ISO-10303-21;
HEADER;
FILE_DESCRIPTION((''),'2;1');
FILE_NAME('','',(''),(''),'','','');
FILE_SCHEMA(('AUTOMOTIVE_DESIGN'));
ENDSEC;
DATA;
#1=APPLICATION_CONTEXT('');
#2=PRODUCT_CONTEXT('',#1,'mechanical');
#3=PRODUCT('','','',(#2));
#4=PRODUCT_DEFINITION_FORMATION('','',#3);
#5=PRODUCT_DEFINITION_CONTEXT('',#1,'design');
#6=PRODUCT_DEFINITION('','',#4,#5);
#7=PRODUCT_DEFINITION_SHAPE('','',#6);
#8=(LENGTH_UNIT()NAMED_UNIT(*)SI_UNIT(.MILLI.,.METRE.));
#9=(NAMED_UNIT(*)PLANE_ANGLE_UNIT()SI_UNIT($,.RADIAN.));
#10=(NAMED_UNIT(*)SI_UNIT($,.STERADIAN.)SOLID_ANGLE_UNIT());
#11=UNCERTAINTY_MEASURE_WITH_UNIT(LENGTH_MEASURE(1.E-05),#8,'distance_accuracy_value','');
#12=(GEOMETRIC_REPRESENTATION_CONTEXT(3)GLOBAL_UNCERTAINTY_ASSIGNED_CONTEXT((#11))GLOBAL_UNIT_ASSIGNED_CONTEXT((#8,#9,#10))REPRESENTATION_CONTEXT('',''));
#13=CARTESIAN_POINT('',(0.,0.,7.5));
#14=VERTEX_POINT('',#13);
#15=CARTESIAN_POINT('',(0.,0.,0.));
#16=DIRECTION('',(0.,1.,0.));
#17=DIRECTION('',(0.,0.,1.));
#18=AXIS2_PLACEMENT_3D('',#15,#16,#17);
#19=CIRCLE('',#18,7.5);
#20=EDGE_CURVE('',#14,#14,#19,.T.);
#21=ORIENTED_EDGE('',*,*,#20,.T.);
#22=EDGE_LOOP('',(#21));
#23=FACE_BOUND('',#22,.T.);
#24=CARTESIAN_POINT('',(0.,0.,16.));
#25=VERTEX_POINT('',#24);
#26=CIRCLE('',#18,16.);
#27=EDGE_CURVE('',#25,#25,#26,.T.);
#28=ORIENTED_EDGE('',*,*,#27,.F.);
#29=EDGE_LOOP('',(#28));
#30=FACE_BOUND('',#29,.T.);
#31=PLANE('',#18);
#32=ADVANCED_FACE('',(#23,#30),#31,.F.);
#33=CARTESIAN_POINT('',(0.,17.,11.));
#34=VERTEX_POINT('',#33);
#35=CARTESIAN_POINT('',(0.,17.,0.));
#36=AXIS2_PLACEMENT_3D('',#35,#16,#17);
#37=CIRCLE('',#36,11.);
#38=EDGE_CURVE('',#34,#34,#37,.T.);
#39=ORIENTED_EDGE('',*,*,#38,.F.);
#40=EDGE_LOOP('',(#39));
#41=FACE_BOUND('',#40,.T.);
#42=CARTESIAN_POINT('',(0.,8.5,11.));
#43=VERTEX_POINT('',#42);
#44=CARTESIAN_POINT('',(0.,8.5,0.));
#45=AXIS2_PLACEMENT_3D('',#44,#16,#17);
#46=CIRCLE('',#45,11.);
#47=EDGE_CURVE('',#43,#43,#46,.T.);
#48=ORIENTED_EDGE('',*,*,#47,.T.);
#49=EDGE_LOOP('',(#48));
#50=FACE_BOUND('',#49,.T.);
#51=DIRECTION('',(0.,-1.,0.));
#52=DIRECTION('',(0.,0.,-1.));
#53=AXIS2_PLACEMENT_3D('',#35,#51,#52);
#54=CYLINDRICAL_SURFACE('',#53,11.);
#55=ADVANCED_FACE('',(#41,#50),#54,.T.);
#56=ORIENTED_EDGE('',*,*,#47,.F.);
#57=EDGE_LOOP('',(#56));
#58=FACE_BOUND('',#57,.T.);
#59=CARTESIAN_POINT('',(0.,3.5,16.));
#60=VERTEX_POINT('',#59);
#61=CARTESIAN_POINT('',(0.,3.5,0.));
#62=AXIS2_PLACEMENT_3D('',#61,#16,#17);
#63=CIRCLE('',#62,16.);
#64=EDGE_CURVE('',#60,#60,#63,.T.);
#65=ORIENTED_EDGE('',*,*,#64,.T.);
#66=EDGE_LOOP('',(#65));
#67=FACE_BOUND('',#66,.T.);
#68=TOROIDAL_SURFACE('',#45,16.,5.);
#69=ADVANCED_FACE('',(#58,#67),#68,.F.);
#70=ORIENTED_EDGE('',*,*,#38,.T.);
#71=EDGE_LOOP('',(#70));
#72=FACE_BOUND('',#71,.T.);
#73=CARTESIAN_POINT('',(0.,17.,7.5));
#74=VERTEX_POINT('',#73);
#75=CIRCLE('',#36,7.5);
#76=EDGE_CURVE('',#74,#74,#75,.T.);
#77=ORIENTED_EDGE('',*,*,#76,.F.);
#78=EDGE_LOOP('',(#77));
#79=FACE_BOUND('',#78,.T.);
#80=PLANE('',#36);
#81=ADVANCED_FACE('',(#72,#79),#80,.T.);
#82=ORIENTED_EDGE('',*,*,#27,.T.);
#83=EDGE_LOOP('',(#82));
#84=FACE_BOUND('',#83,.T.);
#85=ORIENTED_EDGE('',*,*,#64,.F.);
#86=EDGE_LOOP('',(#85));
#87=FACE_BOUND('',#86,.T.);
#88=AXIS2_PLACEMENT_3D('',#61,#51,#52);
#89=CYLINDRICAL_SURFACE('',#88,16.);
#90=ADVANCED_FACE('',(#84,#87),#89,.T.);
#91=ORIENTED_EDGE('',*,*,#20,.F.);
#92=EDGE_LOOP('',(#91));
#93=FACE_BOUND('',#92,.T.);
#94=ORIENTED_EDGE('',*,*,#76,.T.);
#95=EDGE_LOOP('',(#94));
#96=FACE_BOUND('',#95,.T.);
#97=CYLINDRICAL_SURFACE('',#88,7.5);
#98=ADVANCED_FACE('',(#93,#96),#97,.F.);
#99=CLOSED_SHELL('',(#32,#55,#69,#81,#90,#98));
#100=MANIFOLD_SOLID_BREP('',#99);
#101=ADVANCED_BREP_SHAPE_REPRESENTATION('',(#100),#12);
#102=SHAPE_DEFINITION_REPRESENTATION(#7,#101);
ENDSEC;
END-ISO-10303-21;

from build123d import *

# Parameters (mm, degrees)
SKETCH_1_R      = 16
SKETCH_1_R_2    = 7.5
EXTRUDE_1_DEPTH = 3.5
SKETCH_2_R      = 11
SKETCH_2_R_2    = 7.5
EXTRUDE_2_DEPTH = 13.5
FILLET_1_R      = 5


with BuildPart() as part:
    # 草圖1 → 填料-伸長1 (new body)
    with BuildSketch(Plane(origin=(0, 0, 0), x_dir=(1, 0, 0), z_dir=(0, 1, 0))):
        with Locations(Location((0, 0, 0), (0, 0, 270))):
            Circle(SKETCH_1_R)
        with Locations(Location((0, 0, 0), (0, 0, 270))):
            Circle(SKETCH_1_R_2, mode=Mode.SUBTRACT)
    extrude(amount=EXTRUDE_1_DEPTH)

    # 草圖2 → 填料-伸長2 (add)
    with BuildSketch(Plane(origin=(0, 3.5, 0), x_dir=(1, 0, 0), z_dir=(0, 1, 0))):
        with Locations(Location((0, 0, 0), (0, 0, 270))):
            Circle(SKETCH_2_R)
        with Locations(Location((0, 0, 0), (0, 0, 270))):
            Circle(SKETCH_2_R_2, mode=Mode.SUBTRACT)
    extrude(amount=EXTRUDE_2_DEPTH)

    # 圓角1
    fillet_1_edges = [part.edges().sort_by_distance(p)[0] for p in [
        (0, 3.5, -11),
    ]]
    fillet(fillet_1_edges, radius=FILLET_1_R - 0.0001)  # a hair under: the kernel refuses the full size


solid = part.part
